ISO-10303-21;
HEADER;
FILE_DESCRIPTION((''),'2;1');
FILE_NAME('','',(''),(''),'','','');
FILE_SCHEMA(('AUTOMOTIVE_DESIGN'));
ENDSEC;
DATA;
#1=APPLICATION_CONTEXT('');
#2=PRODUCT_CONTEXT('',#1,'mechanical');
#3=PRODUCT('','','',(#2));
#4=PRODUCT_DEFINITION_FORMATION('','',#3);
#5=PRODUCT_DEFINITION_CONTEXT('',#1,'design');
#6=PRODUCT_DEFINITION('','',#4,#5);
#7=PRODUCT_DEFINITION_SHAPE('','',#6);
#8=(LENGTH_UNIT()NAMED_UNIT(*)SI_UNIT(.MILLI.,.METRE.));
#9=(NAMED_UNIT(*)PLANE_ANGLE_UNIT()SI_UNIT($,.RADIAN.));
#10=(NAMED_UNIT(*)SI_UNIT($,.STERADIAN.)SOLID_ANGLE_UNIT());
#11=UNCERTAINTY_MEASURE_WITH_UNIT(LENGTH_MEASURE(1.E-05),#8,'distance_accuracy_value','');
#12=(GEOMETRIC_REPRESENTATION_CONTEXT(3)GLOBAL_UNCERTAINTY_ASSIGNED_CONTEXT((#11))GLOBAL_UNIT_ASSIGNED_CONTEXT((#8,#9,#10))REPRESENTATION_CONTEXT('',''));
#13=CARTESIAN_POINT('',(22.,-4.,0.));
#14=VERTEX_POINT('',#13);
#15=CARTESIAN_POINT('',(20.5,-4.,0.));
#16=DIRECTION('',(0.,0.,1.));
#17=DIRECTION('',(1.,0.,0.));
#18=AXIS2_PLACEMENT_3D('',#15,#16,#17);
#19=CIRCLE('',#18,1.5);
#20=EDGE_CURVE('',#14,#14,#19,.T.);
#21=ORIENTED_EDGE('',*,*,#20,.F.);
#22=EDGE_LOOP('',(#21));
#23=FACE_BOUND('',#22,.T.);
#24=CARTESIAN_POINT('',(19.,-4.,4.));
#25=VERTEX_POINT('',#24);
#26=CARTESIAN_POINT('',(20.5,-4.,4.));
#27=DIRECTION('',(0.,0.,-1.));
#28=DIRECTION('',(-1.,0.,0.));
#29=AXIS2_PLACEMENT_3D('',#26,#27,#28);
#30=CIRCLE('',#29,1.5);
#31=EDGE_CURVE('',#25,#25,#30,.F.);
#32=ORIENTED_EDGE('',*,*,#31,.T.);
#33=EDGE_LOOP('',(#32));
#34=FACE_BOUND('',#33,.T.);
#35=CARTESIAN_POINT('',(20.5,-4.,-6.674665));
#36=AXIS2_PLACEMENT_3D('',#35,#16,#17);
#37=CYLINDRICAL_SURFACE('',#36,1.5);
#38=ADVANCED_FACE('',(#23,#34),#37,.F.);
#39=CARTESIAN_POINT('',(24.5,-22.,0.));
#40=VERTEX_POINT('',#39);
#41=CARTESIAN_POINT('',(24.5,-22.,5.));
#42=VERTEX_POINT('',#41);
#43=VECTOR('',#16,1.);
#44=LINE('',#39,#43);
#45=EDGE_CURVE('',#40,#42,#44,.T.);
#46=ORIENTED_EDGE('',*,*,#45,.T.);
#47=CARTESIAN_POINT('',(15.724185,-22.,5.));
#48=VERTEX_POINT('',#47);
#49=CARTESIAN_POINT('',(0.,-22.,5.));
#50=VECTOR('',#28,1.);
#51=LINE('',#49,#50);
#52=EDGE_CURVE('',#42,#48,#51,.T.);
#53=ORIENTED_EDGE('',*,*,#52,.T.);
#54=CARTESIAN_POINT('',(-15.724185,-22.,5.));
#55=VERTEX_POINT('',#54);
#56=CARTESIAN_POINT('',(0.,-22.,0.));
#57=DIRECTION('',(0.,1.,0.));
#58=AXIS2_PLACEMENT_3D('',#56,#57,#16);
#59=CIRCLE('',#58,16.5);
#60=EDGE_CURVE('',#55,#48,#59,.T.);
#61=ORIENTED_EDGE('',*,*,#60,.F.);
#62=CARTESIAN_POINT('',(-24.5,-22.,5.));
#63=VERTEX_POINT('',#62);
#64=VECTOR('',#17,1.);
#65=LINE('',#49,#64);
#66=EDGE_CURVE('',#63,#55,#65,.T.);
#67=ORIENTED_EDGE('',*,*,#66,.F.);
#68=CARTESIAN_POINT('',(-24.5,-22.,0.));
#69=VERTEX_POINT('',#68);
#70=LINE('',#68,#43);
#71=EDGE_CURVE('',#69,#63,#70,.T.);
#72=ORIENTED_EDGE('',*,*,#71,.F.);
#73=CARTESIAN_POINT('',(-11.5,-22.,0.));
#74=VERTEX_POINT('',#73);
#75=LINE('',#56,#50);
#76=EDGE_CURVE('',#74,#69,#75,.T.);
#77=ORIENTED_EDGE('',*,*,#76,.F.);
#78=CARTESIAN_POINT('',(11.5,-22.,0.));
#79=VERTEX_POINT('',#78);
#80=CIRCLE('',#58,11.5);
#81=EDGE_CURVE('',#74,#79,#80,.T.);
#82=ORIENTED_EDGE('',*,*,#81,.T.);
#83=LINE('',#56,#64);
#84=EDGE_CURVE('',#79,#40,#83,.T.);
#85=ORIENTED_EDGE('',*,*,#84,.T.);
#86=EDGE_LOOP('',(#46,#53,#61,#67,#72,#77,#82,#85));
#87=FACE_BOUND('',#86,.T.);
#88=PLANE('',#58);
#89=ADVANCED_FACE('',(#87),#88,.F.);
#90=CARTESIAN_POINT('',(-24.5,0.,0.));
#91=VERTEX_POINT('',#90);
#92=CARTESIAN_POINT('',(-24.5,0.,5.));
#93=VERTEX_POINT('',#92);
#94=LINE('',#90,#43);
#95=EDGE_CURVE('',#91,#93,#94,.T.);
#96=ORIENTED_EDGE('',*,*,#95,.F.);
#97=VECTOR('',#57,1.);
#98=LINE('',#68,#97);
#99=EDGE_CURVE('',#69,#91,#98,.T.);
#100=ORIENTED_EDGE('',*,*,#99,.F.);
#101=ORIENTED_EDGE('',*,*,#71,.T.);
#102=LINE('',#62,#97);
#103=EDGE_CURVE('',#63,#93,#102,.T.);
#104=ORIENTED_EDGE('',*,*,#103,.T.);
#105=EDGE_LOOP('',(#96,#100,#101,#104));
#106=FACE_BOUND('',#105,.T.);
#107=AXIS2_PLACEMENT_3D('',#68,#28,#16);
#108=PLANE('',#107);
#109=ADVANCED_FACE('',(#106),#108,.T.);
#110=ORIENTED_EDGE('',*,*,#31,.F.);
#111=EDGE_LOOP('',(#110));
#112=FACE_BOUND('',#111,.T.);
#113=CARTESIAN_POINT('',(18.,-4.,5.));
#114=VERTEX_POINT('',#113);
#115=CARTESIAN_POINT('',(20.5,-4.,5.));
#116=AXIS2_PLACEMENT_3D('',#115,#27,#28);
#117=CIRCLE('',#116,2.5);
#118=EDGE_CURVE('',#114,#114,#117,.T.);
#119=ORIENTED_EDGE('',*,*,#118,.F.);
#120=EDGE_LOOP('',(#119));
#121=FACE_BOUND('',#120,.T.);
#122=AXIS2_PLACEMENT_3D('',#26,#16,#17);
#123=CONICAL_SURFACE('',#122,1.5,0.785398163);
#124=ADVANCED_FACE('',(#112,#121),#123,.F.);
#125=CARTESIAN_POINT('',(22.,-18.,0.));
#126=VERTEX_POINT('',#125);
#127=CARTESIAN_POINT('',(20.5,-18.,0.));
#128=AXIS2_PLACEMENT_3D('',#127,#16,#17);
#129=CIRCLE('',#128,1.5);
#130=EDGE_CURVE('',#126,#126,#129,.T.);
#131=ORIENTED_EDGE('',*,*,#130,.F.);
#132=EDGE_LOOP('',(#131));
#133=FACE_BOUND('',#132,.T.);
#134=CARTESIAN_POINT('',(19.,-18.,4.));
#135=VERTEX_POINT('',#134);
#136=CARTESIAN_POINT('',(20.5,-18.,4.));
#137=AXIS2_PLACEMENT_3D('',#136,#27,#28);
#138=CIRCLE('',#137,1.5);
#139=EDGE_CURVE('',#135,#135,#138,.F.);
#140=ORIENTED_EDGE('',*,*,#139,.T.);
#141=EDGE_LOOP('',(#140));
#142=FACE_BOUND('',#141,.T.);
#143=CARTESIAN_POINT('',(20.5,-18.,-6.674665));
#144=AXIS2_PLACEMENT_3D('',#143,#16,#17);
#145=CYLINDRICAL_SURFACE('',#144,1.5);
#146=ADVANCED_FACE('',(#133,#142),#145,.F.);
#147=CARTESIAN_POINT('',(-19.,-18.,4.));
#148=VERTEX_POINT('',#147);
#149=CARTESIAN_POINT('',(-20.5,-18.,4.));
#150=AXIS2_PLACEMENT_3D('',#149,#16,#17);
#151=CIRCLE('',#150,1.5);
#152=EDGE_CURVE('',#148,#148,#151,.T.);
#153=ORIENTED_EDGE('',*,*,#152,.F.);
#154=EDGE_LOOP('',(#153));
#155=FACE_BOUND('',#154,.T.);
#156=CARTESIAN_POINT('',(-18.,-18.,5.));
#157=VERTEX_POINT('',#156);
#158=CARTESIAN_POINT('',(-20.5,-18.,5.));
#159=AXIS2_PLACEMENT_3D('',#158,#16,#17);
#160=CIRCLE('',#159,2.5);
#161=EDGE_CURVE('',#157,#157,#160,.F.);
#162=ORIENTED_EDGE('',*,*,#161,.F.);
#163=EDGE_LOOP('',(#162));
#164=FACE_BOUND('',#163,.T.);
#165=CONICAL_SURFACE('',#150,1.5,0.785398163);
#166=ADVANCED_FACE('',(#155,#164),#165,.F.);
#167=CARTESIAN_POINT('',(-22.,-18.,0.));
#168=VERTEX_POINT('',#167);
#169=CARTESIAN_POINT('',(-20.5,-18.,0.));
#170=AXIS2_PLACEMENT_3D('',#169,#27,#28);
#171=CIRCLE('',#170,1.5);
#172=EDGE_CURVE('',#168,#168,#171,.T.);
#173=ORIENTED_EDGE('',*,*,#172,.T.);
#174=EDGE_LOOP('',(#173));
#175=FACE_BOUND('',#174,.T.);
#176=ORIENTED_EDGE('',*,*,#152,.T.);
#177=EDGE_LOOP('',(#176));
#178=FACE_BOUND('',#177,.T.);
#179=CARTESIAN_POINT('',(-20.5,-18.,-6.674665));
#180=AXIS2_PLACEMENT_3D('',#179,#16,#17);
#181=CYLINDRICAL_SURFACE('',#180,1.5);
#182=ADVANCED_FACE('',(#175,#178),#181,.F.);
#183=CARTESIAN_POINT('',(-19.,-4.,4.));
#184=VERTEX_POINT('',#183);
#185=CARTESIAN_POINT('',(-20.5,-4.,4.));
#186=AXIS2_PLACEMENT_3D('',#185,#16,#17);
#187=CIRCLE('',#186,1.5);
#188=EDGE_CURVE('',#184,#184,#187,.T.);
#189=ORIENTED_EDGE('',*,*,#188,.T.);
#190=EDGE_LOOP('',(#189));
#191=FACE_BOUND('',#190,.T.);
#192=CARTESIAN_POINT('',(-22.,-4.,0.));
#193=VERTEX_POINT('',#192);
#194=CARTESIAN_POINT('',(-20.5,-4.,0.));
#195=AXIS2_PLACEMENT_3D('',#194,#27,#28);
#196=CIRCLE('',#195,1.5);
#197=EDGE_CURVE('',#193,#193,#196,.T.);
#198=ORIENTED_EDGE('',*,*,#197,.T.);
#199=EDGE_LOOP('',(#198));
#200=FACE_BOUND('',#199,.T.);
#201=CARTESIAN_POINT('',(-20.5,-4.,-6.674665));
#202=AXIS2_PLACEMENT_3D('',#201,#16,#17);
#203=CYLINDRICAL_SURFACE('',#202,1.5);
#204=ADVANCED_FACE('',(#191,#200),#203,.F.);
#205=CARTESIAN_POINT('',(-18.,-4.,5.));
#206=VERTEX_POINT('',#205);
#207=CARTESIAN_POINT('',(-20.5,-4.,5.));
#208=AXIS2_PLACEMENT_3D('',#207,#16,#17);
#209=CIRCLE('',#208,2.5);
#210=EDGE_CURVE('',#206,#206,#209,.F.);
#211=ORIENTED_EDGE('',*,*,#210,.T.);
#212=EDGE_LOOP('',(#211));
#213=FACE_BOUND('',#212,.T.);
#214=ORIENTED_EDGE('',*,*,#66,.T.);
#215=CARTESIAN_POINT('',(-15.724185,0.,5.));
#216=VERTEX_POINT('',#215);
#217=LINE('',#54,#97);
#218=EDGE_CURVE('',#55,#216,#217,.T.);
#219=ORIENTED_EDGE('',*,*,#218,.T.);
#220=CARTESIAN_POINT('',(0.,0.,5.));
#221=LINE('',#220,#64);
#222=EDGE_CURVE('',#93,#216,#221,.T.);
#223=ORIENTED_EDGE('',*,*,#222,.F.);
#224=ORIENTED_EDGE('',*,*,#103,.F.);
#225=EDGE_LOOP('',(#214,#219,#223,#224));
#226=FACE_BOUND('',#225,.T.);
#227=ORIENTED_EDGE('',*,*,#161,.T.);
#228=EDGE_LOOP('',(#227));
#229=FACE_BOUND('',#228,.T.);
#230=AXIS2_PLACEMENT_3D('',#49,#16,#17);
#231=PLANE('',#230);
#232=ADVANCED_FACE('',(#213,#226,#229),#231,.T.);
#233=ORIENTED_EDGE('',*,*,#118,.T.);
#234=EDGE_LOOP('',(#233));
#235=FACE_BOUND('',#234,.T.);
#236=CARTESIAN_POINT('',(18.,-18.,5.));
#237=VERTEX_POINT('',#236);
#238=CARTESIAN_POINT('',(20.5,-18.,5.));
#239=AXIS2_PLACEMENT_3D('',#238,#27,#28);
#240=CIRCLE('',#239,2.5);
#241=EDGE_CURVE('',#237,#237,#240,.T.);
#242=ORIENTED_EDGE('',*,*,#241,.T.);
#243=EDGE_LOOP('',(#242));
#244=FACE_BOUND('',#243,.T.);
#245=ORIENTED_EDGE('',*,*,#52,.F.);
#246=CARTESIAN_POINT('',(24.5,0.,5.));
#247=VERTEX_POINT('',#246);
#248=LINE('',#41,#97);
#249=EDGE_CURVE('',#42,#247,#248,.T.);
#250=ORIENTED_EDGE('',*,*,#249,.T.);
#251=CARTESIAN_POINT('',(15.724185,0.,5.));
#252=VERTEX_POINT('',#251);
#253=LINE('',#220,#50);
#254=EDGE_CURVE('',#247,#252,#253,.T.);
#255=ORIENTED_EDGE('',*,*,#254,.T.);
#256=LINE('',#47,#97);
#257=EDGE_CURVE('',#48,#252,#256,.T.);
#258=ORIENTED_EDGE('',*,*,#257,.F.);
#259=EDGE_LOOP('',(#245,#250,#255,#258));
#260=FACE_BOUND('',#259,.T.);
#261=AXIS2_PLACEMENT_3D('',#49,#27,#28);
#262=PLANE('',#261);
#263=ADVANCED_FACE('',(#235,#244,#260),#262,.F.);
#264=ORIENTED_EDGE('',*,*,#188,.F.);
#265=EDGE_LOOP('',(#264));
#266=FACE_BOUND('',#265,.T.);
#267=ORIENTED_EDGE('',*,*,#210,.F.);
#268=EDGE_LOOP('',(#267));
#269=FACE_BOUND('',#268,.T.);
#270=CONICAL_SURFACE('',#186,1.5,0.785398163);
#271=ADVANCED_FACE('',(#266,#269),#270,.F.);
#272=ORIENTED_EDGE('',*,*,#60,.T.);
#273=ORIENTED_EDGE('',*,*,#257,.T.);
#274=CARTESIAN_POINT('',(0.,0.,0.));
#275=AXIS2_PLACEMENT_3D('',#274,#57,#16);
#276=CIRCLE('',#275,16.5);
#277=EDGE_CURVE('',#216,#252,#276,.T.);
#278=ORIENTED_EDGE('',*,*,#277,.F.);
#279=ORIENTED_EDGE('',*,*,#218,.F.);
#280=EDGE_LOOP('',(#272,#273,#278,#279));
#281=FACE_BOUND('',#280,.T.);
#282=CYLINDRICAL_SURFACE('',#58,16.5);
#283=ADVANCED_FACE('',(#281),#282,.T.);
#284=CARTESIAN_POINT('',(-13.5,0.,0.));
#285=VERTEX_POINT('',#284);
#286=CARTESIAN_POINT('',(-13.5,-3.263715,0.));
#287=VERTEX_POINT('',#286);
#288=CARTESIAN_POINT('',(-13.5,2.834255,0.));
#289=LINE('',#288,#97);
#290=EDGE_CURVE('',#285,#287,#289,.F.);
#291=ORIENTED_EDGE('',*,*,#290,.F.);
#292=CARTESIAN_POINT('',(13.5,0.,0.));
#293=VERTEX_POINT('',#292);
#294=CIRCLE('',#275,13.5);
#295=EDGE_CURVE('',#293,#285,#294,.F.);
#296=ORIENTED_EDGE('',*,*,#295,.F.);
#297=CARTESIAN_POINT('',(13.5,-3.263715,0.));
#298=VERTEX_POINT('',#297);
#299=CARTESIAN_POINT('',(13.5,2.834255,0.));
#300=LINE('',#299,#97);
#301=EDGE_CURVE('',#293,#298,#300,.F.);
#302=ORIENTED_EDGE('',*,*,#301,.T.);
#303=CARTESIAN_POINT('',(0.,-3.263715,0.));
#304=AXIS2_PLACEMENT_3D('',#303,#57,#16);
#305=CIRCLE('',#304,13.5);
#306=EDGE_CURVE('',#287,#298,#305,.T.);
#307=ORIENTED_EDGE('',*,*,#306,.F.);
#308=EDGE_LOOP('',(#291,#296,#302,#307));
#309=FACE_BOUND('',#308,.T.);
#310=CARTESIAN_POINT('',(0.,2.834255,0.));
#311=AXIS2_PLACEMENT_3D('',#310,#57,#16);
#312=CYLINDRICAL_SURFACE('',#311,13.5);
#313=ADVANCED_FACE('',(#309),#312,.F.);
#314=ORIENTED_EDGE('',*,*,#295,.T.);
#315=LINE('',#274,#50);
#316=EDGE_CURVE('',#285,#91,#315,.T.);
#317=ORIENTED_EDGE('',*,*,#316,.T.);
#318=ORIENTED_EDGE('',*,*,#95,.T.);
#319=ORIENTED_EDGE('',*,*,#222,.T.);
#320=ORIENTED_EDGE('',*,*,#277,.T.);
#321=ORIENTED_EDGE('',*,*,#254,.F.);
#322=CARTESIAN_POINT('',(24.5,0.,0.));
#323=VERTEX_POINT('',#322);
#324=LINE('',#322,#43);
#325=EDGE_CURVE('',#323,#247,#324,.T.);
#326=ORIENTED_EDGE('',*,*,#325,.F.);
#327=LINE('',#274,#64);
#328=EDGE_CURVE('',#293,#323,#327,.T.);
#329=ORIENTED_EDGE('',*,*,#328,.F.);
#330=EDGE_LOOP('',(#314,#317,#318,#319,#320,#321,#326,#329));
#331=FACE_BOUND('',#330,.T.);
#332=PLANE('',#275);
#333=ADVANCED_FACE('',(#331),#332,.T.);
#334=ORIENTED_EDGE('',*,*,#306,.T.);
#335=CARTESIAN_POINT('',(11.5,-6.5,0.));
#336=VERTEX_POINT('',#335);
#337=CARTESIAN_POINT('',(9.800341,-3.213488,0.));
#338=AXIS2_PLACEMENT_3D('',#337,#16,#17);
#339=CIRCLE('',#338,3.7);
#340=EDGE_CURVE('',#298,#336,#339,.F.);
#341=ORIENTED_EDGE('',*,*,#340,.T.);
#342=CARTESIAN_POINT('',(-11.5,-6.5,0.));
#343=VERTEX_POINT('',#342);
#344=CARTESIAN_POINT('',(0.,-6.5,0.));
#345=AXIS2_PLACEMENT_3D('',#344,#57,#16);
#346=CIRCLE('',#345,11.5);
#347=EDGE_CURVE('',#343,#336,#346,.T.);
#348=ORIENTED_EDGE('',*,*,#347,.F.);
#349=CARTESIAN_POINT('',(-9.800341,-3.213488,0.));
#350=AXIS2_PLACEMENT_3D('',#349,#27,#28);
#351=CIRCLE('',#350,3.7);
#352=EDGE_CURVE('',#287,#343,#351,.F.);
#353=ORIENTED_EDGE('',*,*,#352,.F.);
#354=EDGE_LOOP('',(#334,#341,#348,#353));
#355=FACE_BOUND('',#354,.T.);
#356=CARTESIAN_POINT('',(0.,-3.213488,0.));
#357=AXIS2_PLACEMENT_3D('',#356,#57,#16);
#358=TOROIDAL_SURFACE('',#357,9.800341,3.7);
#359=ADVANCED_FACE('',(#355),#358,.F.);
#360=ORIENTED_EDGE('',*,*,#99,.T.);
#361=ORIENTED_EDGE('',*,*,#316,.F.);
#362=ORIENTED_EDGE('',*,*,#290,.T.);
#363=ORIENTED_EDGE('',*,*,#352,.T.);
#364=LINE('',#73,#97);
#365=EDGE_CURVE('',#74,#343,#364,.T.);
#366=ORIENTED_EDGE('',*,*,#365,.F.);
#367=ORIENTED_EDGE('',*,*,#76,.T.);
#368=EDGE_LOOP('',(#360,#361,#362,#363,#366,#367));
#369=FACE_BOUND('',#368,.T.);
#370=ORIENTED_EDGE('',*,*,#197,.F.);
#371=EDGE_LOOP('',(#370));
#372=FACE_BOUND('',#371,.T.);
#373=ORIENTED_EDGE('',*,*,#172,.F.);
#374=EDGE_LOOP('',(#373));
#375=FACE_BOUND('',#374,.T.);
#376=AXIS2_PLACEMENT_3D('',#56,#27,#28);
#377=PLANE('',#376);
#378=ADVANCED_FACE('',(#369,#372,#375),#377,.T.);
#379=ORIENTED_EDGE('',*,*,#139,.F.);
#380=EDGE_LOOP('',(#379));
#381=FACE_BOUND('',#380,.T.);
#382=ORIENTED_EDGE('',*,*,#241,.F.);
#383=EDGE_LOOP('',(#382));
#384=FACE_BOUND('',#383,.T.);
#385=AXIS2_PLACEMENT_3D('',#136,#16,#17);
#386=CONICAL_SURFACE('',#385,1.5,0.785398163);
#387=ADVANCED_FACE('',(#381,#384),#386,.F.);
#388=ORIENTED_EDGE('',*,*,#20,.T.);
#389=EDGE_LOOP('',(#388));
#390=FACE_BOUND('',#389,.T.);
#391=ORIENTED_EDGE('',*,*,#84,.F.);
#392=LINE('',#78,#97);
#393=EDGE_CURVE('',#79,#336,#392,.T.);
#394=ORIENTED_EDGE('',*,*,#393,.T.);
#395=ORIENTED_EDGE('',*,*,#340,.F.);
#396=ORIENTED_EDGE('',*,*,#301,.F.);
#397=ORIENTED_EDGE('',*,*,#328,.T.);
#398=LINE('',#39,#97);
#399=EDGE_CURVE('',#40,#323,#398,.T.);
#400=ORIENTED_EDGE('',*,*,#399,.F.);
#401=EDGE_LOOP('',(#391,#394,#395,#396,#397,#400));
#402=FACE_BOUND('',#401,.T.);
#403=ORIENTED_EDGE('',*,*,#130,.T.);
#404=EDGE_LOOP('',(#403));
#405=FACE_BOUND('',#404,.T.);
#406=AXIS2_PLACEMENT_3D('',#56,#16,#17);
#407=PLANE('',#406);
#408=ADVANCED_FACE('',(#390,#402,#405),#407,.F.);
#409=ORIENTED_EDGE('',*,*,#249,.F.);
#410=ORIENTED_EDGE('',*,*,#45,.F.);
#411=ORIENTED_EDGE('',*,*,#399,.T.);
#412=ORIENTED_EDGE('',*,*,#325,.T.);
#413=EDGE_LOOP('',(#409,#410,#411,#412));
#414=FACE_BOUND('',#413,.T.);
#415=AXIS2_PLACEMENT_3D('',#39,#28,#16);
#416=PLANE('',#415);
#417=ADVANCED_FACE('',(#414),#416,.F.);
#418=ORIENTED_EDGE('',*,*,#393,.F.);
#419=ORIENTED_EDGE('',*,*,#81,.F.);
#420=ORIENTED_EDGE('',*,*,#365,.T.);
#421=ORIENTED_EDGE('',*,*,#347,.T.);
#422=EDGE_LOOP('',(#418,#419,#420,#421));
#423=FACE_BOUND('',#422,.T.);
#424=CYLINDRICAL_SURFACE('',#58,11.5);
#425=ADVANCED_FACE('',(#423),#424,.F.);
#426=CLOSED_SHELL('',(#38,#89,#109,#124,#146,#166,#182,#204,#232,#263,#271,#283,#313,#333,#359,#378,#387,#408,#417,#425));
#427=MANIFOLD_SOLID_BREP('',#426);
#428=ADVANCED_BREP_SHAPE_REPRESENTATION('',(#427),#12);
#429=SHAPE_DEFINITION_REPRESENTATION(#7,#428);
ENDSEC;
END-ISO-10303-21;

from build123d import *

# Parameters (mm, degrees)
BOSS_EXTRUDE1_DEPTH     = 22
BOSS_EXTRUDE3_START     = -5
BOSS_EXTRUDE3_OUTLINE_R = 1.5
BOSS_EXTRUDE3_DEPTH     = 5
CHAMFER2_SIZE           = 1


# Read off the part's stored shape, not the designer's step: Boss-Extrude3
with BuildPart() as part:
    # Sketch1 → Boss-Extrude1 (new body)
    with BuildSketch(Plane(origin=(0, 0, 0), x_dir=(1, 0, 0), z_dir=(0, 1, 0))):
        with BuildLine():
            Line((0, -16.5), (0, -11.5))
            ThreePointArc((0, -11.5), (-8.131727984, -8.131727984), (-11.5, 0))
            Line((-11.5, 0), (-16.5, 0))
            Line((-16.5, 0), (-24.5, 0))
            Line((-24.5, 0), (-24.5, -5))
            Line((-24.5, -5), (-15.724185194, -5))
            ThreePointArc((-15.724185194, -5), (-9.740379869, -13.318220602), (0, -16.5))
        make_face()
        with BuildLine():
            Line((24.5, 0), (16.5, 0))
            Line((16.5, 0), (11.5, 0))
            ThreePointArc((11.5, 0), (8.131727984, -8.131727984), (0, -11.5))
            Line((0, -11.5), (0, -16.5))
            ThreePointArc((0, -16.5), (9.740379869, -13.318220602), (15.724185194, -5))
            Line((15.724185194, -5), (24.5, -5))
            Line((24.5, -5), (24.5, 0))
        make_face()
    extrude(amount=-BOSS_EXTRUDE1_DEPTH)

    # Boss-Extrude3 outline → Boss-Extrude3 (cut)
    with BuildSketch(Plane.XY.offset(5).offset(BOSS_EXTRUDE3_START)):
        with Locations((20.5, -18)):
            Circle(BOSS_EXTRUDE3_OUTLINE_R)
        with Locations((20.5, -4)):
            Circle(BOSS_EXTRUDE3_OUTLINE_R)
        with Locations((-20.5, -4)):
            Circle(BOSS_EXTRUDE3_OUTLINE_R)
        with Locations((-20.5, -18)):
            Circle(BOSS_EXTRUDE3_OUTLINE_R)
    extrude(amount=BOSS_EXTRUDE3_DEPTH, mode=Mode.SUBTRACT)

    # Chamfer2
    chamfer2_edges = [part.edges().sort_by_distance(p)[0] for p in [
        (-22, -18, 5),
        (19, -4, 5),
        (19, -18, 5),
        (-22, -4, 5),
    ]]
    chamfer(chamfer2_edges, length=CHAMFER2_SIZE)

    # Sketch4 → Cut-Revolve2 (revolve, cut)
    with BuildSketch(Plane(origin=(0, 0, 0), x_dir=(-1, 0, 0), z_dir=(0, 0, -1))):
        with BuildLine():
            Line((-11.5, 0), (-11.5, -6.5))
            ThreePointArc((-11.5, -6.5), (-12.947807153, -5.158599205), (-13.5, -3.263715381))
            Line((-13.5, -3.263715381), (-13.5, 0))
            Line((-13.5, 0), (-11.5, 0))
        make_face()
    revolve(axis=Axis((0, 2.834255205, 0), (0, -1, 0)), mode=Mode.SUBTRACT)


solid = part.part
